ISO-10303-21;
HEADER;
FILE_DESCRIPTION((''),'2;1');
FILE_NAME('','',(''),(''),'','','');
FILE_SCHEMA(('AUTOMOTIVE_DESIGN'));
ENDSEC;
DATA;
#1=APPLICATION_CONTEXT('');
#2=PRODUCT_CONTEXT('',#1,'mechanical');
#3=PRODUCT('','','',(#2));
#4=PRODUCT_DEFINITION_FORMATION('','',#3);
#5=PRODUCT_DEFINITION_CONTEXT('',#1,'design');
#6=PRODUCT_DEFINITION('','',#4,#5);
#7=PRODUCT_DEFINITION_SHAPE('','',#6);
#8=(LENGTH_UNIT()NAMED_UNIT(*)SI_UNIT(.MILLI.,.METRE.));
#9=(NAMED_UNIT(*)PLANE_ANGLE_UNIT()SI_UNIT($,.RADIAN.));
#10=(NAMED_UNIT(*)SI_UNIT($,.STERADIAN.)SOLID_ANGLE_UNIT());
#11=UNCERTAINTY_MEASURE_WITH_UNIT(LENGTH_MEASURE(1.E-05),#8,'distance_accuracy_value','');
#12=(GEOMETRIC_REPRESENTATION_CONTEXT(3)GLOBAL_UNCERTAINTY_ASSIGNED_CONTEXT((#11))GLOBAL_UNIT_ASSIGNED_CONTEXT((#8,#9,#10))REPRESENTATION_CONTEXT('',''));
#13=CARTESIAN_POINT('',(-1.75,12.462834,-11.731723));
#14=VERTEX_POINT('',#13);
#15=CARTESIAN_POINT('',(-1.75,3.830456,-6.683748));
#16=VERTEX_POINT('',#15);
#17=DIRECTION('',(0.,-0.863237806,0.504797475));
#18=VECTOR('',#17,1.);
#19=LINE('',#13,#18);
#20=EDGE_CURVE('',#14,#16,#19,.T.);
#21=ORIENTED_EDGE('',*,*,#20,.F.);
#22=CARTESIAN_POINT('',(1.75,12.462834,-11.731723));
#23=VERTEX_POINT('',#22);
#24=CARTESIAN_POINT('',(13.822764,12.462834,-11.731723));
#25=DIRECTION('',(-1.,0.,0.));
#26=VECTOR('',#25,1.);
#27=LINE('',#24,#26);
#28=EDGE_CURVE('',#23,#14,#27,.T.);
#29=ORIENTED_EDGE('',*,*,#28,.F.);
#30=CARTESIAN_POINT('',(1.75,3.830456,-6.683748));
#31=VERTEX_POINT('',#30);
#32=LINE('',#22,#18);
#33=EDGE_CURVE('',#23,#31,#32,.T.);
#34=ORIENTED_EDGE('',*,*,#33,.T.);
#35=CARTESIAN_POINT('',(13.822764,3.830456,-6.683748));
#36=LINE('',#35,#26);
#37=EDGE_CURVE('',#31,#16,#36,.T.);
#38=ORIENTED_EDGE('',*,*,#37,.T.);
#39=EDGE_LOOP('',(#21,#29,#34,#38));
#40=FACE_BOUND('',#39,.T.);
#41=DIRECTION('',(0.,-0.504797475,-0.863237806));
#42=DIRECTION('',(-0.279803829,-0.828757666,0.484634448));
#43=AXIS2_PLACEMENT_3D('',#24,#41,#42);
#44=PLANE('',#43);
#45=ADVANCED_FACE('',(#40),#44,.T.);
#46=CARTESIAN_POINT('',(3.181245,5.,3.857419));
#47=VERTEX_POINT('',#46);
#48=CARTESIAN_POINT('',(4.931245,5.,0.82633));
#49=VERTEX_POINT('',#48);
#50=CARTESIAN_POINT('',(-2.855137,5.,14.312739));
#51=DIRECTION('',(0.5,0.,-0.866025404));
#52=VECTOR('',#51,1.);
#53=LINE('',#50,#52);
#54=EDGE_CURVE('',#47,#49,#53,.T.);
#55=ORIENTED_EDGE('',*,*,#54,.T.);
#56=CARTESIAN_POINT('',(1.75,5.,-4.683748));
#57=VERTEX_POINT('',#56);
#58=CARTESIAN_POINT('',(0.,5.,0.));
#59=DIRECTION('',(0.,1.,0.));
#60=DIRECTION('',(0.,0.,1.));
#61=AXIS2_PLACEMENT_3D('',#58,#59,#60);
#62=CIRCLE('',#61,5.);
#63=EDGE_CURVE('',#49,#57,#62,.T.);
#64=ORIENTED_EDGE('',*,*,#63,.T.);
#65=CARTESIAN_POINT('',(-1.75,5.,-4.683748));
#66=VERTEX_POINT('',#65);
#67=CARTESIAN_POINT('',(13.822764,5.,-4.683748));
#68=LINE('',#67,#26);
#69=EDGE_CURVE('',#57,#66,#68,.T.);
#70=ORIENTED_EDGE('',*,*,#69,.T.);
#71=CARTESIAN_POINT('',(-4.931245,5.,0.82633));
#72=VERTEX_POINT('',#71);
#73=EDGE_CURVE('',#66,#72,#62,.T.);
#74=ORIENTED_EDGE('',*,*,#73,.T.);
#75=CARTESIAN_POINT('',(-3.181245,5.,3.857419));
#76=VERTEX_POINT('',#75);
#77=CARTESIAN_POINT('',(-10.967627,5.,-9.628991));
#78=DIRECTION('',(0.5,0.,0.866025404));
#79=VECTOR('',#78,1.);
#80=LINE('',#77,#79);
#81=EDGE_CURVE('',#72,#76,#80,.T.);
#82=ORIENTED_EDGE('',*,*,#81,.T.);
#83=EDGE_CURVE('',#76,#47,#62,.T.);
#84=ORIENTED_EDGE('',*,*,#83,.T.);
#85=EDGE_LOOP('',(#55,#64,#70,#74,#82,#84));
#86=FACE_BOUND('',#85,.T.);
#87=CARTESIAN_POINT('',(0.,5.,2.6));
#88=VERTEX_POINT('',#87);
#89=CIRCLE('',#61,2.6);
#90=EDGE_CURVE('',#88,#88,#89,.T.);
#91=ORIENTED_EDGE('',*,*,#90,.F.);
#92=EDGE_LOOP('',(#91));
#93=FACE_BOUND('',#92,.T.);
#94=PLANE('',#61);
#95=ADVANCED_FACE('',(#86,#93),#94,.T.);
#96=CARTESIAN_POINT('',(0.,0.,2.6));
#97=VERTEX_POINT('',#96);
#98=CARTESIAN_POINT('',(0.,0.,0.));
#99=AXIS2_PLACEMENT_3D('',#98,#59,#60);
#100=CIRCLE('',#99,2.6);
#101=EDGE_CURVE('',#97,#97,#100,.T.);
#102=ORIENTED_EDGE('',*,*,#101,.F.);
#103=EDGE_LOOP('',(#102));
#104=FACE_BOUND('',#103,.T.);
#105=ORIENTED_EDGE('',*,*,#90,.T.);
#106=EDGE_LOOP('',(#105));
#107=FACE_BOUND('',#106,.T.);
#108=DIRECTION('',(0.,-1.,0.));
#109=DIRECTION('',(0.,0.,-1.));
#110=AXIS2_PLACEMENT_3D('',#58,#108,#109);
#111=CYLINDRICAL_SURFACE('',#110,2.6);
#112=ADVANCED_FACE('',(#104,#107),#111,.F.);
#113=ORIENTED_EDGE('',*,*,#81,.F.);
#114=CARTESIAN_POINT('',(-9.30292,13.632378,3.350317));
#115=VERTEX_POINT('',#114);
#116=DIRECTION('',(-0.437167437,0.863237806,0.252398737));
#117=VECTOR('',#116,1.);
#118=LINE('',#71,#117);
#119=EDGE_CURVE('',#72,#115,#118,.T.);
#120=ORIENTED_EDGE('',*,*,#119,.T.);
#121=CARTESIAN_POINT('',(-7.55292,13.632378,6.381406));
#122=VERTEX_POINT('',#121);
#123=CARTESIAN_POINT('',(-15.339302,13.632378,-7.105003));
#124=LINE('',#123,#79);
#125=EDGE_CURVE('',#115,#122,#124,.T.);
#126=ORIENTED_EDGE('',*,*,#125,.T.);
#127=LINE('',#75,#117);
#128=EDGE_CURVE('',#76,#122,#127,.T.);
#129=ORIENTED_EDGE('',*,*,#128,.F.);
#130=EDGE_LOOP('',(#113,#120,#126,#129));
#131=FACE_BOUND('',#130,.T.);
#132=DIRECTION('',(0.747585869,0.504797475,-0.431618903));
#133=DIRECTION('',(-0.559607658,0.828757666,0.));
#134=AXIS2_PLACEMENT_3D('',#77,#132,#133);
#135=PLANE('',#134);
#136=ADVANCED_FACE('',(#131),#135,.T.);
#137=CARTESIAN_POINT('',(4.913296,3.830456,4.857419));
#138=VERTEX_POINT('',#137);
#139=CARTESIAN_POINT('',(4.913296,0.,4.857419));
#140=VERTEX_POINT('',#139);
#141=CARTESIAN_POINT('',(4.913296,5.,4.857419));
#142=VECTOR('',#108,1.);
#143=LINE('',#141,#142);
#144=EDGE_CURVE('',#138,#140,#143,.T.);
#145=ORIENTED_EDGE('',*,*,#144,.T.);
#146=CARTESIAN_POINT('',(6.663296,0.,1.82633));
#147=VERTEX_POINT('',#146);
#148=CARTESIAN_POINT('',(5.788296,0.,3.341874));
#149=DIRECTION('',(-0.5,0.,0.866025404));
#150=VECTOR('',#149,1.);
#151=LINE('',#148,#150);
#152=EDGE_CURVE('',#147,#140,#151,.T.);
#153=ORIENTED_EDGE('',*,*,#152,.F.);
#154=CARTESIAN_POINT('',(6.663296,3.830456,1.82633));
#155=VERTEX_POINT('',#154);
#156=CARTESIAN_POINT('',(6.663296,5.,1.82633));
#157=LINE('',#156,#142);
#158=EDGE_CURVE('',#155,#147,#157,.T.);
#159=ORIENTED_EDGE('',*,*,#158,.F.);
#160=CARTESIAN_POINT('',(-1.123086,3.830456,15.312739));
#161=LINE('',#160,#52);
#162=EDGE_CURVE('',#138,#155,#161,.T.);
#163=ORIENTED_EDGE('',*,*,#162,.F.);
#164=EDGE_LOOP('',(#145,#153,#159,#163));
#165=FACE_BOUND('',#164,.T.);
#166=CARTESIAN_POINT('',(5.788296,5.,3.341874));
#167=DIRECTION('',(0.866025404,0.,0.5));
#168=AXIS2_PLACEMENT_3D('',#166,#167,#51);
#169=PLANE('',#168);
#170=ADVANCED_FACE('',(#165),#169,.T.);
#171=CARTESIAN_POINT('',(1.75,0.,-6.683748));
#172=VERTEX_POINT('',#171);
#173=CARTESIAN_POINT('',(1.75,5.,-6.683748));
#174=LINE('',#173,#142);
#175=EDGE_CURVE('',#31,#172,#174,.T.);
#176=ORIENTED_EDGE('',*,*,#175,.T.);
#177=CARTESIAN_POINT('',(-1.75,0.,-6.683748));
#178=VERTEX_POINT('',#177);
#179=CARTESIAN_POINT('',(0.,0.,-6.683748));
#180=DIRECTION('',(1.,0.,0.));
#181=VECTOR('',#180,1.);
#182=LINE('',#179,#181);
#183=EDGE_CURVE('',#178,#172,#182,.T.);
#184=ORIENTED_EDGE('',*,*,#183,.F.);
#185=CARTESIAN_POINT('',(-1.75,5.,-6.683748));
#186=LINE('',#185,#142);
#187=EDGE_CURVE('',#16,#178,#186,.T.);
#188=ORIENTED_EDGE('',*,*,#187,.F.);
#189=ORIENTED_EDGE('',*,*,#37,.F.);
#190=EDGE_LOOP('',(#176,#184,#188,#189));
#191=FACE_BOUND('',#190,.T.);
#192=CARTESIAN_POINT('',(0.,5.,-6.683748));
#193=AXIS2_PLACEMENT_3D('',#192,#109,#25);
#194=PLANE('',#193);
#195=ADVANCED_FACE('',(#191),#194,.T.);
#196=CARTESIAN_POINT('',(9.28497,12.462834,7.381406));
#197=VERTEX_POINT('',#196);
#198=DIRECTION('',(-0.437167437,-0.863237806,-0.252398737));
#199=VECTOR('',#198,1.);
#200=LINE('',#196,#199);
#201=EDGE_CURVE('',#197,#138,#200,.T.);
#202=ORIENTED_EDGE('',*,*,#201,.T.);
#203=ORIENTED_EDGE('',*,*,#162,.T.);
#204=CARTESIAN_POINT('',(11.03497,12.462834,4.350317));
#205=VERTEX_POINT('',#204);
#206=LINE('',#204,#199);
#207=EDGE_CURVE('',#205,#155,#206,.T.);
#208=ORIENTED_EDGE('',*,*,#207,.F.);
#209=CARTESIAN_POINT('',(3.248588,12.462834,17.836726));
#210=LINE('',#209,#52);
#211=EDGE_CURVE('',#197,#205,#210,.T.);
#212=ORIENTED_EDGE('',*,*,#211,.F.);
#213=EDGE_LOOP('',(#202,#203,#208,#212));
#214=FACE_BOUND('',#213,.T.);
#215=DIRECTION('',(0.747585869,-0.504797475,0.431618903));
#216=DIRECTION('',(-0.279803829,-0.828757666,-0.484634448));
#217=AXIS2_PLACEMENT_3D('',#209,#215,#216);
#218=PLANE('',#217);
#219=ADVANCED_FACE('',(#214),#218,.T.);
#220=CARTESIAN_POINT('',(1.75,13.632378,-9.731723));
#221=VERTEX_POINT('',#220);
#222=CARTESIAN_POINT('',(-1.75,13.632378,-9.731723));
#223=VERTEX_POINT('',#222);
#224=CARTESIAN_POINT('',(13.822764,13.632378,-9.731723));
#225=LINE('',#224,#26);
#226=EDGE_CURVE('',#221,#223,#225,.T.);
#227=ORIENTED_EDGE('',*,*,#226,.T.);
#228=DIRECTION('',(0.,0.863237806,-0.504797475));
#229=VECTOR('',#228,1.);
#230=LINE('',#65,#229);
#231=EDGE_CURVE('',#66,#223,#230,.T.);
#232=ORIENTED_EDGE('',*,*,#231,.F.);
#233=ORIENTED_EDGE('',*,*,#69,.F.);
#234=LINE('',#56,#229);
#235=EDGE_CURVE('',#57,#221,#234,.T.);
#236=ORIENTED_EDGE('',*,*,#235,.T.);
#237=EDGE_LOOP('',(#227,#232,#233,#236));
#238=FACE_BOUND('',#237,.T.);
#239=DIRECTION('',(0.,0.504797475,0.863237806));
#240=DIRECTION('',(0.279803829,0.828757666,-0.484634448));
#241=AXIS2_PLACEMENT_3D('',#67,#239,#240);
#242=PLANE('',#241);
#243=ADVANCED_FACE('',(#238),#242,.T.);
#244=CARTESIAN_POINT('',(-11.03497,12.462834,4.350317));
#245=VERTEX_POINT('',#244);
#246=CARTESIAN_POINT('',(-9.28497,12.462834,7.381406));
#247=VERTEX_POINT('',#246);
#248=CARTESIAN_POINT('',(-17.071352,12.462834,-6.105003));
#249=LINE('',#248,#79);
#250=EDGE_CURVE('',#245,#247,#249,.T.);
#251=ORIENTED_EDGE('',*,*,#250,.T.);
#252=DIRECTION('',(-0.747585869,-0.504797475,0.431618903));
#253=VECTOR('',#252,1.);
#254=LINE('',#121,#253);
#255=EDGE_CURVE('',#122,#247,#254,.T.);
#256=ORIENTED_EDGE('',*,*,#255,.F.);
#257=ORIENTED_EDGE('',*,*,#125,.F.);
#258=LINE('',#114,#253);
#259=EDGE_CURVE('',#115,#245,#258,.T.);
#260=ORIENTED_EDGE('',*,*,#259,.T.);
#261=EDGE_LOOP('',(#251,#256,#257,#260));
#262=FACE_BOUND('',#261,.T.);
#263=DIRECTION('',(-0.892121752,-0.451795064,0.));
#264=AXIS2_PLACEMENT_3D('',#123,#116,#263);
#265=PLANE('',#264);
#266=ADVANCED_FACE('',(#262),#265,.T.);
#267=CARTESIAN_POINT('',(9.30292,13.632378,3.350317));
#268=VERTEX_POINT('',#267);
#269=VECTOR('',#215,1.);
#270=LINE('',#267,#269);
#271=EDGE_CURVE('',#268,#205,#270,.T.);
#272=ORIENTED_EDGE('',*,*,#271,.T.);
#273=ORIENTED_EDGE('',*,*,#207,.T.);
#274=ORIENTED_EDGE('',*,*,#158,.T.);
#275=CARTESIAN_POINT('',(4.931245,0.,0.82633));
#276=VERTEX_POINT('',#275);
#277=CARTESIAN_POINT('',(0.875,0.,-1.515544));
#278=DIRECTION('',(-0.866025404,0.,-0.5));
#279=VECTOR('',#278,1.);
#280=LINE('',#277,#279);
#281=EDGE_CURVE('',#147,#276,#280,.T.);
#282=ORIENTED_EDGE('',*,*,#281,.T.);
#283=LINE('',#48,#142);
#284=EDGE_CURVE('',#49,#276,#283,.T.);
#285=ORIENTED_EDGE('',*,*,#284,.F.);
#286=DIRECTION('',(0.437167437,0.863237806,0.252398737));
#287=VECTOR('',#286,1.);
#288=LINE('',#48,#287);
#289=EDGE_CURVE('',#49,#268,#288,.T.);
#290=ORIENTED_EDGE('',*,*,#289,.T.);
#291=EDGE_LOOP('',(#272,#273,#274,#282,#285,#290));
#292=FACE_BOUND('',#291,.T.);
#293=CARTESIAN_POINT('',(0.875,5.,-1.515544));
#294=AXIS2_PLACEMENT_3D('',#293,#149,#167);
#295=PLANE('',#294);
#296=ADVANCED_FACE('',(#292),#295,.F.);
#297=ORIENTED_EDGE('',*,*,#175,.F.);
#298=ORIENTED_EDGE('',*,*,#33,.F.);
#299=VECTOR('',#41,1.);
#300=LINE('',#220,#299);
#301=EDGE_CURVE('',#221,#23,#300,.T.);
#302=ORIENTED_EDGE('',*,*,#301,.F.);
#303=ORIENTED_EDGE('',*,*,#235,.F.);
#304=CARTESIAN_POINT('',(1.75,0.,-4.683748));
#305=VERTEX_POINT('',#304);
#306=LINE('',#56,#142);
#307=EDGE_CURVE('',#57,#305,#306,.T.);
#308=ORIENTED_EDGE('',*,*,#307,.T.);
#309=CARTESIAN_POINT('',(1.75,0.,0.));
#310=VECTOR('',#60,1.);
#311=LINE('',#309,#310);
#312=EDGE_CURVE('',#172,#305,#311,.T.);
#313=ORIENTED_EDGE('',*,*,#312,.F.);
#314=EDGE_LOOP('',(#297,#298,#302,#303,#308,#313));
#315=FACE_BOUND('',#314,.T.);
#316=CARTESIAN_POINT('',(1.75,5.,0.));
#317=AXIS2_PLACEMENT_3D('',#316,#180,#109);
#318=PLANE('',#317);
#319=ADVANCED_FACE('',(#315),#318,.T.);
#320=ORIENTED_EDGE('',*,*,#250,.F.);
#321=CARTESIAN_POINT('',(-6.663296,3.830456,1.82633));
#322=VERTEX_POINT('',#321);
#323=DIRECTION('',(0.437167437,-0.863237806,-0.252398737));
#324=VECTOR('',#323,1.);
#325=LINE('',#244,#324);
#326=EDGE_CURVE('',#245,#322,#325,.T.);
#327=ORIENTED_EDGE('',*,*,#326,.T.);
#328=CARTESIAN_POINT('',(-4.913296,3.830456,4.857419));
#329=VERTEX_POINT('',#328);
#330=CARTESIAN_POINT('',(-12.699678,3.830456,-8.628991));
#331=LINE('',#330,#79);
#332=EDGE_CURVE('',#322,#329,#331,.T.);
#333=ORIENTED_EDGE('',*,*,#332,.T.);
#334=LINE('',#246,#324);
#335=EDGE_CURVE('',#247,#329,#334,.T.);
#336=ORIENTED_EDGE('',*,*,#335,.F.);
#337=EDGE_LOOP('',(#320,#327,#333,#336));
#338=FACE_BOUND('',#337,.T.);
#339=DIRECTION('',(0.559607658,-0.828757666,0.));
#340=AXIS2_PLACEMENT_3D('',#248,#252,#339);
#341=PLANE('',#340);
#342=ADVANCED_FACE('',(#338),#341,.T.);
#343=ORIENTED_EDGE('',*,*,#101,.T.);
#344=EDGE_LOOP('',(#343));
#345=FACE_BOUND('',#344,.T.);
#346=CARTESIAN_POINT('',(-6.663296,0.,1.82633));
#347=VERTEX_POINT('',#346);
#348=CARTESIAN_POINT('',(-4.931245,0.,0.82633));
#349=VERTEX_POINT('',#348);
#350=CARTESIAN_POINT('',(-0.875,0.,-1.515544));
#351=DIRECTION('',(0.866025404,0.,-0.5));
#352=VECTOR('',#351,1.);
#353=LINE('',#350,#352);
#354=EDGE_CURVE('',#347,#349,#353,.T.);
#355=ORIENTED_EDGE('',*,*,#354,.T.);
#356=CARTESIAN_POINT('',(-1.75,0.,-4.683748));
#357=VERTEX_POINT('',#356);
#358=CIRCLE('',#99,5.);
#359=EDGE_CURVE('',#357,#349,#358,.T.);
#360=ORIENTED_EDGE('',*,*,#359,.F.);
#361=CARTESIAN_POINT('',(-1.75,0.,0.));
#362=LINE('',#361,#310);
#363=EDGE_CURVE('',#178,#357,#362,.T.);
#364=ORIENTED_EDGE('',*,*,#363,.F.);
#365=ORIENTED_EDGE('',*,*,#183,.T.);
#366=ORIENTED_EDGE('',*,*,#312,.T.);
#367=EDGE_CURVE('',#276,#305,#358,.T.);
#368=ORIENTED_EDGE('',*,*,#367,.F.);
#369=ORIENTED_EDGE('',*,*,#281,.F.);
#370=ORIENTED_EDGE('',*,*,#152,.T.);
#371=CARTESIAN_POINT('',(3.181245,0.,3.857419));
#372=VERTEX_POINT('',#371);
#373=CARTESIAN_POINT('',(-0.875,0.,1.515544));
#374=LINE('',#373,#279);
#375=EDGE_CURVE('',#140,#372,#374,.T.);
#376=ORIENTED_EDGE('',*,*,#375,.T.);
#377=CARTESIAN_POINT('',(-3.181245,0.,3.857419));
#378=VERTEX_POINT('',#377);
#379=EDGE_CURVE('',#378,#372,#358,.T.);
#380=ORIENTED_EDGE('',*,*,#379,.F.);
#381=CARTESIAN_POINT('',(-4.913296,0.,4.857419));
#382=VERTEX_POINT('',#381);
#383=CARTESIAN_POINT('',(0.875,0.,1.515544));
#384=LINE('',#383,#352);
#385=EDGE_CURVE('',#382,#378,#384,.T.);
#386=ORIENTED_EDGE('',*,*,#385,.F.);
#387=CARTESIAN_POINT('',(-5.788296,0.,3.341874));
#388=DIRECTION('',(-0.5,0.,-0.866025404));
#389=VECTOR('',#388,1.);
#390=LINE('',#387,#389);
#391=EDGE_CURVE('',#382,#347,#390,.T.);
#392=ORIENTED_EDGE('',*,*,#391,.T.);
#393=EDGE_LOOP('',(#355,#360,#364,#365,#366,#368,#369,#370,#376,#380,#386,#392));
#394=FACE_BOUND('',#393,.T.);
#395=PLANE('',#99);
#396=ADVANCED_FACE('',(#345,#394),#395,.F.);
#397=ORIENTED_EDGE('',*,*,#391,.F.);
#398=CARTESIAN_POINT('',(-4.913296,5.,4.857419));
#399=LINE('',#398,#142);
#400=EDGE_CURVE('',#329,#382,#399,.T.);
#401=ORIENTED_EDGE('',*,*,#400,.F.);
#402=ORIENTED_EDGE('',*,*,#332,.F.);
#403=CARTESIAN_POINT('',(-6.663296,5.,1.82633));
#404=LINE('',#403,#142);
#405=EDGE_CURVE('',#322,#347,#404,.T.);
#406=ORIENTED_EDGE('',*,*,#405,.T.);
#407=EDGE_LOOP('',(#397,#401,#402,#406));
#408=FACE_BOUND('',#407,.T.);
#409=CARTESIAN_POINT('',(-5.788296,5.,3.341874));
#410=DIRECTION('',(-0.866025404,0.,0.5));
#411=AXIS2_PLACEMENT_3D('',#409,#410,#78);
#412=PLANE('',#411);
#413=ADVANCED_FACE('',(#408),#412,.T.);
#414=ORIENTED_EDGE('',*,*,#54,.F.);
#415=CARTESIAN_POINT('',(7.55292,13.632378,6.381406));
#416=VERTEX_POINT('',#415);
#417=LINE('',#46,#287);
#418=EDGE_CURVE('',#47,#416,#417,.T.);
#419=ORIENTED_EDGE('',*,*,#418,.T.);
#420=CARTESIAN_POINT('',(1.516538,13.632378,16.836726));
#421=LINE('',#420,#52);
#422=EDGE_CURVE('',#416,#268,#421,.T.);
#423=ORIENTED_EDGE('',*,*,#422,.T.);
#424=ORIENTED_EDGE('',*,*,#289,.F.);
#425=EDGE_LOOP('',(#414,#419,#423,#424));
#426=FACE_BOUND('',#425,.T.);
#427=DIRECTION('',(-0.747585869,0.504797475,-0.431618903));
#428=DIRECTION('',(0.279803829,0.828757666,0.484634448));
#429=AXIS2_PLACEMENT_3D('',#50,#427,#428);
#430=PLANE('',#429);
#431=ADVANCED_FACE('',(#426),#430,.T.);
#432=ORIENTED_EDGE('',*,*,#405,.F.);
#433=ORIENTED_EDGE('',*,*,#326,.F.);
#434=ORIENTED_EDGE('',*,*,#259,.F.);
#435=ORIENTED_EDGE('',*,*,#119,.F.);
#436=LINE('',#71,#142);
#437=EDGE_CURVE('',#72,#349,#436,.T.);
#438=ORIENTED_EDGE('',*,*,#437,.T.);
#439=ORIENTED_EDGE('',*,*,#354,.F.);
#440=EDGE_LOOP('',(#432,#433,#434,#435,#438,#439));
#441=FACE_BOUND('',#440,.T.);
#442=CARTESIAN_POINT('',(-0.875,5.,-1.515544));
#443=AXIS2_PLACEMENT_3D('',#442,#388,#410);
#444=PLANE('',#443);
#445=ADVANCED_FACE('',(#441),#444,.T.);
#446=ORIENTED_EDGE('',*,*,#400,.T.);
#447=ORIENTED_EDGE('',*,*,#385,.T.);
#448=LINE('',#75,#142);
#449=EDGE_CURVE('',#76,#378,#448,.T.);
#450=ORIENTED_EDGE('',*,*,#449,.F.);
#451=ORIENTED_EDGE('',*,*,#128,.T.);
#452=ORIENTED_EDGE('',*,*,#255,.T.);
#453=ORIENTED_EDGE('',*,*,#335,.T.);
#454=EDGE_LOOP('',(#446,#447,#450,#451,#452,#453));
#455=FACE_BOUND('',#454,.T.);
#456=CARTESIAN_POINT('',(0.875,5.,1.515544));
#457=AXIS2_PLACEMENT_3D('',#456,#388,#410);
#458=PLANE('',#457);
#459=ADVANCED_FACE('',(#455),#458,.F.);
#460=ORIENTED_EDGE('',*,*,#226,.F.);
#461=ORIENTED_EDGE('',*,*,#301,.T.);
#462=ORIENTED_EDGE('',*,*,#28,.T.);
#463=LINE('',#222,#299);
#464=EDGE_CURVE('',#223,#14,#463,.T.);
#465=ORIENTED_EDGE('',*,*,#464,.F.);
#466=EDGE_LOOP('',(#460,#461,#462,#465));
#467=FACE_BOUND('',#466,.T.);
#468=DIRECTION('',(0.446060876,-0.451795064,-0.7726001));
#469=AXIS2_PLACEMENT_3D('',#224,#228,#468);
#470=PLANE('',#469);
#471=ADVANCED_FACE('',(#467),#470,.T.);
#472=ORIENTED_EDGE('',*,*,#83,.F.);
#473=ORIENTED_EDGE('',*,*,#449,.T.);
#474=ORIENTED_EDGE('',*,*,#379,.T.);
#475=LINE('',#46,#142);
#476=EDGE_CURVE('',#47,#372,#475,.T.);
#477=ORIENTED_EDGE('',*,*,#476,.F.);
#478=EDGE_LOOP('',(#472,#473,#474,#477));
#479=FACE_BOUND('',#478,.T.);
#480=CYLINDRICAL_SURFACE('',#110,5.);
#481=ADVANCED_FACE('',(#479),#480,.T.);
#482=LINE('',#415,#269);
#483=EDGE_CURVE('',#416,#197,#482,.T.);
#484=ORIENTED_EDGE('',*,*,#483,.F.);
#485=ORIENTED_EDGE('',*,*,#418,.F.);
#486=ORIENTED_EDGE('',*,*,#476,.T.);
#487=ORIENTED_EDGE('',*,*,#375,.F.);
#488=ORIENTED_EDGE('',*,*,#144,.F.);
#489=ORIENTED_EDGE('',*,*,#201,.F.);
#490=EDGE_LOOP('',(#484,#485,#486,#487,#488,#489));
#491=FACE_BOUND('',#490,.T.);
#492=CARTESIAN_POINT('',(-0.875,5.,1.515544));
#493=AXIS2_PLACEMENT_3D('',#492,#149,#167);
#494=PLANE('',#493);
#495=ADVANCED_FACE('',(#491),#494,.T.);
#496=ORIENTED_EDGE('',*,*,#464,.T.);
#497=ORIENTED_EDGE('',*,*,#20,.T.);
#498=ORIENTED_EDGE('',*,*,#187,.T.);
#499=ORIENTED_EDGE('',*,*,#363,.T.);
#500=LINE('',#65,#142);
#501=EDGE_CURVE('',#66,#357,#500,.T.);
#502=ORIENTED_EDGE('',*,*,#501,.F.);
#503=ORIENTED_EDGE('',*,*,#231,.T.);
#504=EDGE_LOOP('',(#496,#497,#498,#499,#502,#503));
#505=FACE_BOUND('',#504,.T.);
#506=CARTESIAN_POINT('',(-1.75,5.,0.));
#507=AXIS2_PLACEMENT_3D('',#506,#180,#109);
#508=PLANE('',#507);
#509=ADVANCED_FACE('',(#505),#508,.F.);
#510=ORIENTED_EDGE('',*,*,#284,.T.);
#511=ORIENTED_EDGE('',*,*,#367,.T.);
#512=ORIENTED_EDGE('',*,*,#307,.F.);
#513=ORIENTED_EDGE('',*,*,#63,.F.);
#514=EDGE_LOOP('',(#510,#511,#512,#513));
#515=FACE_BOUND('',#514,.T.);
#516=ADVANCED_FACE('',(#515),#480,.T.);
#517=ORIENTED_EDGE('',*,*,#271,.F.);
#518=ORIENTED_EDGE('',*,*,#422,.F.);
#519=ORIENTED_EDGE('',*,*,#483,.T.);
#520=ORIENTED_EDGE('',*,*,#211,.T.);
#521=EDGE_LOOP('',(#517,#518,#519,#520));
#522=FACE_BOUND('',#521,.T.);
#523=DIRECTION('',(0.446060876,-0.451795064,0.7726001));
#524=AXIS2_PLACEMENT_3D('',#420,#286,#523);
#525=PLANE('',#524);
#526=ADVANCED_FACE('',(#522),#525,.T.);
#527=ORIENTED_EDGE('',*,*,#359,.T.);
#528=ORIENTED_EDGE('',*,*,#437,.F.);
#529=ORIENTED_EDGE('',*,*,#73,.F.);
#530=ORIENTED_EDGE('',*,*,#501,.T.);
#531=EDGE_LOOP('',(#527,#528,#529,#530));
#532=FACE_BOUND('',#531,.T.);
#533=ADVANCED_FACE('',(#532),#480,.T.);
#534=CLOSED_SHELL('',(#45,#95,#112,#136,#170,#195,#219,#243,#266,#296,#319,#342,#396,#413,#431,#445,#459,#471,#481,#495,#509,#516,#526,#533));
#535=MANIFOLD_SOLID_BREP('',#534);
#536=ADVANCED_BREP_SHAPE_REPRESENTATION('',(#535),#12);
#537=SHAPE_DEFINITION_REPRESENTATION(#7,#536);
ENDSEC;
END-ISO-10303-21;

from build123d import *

# Parameters (mm, degrees)
SKETCH_1_R               = 2.6
EXTRUDE_1_DEPTH          = 5
EXTRUDE_2_DEPTH          = 3.5
PATTERN_CIRCULAR_4_COUNT = 3


with BuildPart() as part:
    # 草图1 → 凸台-拉伸1 (new body)
    with BuildSketch(Plane(origin=(0, 0, 0), x_dir=(1, 0, 0), z_dir=(0, 1, 0))):
        with BuildLine():
            Line((-4.913295992, -4.857418706), (-3.181245185, -3.857418706))
            ThreePointArc((-3.181245185, -3.857418706), (0, -5), (3.181245185, -3.857418706))
            Line((3.181245185, -3.857418706), (4.913295992, -4.857418706))
            Line((4.913295992, -4.857418706), (6.663295992, -1.826329793))
            Line((6.663295992, -1.826329793), (4.931245185, -0.826329793))
            ThreePointArc((4.931245185, -0.826329793), (4.330127019, 2.5), (1.75, 4.683748499))
            Line((1.75, 4.683748499), (1.75, 6.683748499))
            Line((1.75, 6.683748499), (-1.75, 6.683748499))
            Line((-1.75, 6.683748499), (-1.75, 4.683748499))
            ThreePointArc((-1.75, 4.683748499), (-4.330127019, 2.5), (-4.931245185, -0.826329793))
            Line((-4.931245185, -0.826329793), (-6.663295992, -1.826329793))
            Line((-6.663295992, -1.826329793), (-4.913295992, -4.857418706))
        make_face()
        with Locations(Location((0, 0, 0), (0, 0, 270))):
            Circle(SKETCH_1_R, mode=Mode.SUBTRACT)
    extrude(amount=EXTRUDE_1_DEPTH)

    # 草图2 → 凸台-拉伸2 (add)
    with BuildSketch(Plane(origin=(0.875, 0, 1.515544457), x_dir=(0.8660254037844383, 0, -0.5000000000000009), z_dir=(0.5000000000000008, 0, 0.8660254037844382))):
        Polygon((-4.683748499, 5), (-9.731723247, 13.632378058), (-11.731723247, 12.462833649), (-6.683748499, 3.830455591), align=None)
    extrude(amount=-EXTRUDE_2_DEPTH)


with BuildPart() as pattern_circular_4_1:
    # 阵列(圆周)4: pattern copy
    add(part.part.rotate(Axis((0, 0, 0), (0, 1, 0)), 1 * 360 / PATTERN_CIRCULAR_4_COUNT))


with BuildPart() as pattern_circular_4_2:
    # 阵列(圆周)4: pattern copy
    add(part.part.rotate(Axis((0, 0, 0), (0, 1, 0)), 2 * 360 / PATTERN_CIRCULAR_4_COUNT))


with BuildPart() as pattern_circular_4_1_1:
    add(pattern_circular_4_1.part)

    # Combine 1: read off the stored shape, not the designer's step
    # Combine 1: union 阵列(圆周)4_2, part
    add(pattern_circular_4_2.part)
    add(part.part)


solid = pattern_circular_4_1_1.part
